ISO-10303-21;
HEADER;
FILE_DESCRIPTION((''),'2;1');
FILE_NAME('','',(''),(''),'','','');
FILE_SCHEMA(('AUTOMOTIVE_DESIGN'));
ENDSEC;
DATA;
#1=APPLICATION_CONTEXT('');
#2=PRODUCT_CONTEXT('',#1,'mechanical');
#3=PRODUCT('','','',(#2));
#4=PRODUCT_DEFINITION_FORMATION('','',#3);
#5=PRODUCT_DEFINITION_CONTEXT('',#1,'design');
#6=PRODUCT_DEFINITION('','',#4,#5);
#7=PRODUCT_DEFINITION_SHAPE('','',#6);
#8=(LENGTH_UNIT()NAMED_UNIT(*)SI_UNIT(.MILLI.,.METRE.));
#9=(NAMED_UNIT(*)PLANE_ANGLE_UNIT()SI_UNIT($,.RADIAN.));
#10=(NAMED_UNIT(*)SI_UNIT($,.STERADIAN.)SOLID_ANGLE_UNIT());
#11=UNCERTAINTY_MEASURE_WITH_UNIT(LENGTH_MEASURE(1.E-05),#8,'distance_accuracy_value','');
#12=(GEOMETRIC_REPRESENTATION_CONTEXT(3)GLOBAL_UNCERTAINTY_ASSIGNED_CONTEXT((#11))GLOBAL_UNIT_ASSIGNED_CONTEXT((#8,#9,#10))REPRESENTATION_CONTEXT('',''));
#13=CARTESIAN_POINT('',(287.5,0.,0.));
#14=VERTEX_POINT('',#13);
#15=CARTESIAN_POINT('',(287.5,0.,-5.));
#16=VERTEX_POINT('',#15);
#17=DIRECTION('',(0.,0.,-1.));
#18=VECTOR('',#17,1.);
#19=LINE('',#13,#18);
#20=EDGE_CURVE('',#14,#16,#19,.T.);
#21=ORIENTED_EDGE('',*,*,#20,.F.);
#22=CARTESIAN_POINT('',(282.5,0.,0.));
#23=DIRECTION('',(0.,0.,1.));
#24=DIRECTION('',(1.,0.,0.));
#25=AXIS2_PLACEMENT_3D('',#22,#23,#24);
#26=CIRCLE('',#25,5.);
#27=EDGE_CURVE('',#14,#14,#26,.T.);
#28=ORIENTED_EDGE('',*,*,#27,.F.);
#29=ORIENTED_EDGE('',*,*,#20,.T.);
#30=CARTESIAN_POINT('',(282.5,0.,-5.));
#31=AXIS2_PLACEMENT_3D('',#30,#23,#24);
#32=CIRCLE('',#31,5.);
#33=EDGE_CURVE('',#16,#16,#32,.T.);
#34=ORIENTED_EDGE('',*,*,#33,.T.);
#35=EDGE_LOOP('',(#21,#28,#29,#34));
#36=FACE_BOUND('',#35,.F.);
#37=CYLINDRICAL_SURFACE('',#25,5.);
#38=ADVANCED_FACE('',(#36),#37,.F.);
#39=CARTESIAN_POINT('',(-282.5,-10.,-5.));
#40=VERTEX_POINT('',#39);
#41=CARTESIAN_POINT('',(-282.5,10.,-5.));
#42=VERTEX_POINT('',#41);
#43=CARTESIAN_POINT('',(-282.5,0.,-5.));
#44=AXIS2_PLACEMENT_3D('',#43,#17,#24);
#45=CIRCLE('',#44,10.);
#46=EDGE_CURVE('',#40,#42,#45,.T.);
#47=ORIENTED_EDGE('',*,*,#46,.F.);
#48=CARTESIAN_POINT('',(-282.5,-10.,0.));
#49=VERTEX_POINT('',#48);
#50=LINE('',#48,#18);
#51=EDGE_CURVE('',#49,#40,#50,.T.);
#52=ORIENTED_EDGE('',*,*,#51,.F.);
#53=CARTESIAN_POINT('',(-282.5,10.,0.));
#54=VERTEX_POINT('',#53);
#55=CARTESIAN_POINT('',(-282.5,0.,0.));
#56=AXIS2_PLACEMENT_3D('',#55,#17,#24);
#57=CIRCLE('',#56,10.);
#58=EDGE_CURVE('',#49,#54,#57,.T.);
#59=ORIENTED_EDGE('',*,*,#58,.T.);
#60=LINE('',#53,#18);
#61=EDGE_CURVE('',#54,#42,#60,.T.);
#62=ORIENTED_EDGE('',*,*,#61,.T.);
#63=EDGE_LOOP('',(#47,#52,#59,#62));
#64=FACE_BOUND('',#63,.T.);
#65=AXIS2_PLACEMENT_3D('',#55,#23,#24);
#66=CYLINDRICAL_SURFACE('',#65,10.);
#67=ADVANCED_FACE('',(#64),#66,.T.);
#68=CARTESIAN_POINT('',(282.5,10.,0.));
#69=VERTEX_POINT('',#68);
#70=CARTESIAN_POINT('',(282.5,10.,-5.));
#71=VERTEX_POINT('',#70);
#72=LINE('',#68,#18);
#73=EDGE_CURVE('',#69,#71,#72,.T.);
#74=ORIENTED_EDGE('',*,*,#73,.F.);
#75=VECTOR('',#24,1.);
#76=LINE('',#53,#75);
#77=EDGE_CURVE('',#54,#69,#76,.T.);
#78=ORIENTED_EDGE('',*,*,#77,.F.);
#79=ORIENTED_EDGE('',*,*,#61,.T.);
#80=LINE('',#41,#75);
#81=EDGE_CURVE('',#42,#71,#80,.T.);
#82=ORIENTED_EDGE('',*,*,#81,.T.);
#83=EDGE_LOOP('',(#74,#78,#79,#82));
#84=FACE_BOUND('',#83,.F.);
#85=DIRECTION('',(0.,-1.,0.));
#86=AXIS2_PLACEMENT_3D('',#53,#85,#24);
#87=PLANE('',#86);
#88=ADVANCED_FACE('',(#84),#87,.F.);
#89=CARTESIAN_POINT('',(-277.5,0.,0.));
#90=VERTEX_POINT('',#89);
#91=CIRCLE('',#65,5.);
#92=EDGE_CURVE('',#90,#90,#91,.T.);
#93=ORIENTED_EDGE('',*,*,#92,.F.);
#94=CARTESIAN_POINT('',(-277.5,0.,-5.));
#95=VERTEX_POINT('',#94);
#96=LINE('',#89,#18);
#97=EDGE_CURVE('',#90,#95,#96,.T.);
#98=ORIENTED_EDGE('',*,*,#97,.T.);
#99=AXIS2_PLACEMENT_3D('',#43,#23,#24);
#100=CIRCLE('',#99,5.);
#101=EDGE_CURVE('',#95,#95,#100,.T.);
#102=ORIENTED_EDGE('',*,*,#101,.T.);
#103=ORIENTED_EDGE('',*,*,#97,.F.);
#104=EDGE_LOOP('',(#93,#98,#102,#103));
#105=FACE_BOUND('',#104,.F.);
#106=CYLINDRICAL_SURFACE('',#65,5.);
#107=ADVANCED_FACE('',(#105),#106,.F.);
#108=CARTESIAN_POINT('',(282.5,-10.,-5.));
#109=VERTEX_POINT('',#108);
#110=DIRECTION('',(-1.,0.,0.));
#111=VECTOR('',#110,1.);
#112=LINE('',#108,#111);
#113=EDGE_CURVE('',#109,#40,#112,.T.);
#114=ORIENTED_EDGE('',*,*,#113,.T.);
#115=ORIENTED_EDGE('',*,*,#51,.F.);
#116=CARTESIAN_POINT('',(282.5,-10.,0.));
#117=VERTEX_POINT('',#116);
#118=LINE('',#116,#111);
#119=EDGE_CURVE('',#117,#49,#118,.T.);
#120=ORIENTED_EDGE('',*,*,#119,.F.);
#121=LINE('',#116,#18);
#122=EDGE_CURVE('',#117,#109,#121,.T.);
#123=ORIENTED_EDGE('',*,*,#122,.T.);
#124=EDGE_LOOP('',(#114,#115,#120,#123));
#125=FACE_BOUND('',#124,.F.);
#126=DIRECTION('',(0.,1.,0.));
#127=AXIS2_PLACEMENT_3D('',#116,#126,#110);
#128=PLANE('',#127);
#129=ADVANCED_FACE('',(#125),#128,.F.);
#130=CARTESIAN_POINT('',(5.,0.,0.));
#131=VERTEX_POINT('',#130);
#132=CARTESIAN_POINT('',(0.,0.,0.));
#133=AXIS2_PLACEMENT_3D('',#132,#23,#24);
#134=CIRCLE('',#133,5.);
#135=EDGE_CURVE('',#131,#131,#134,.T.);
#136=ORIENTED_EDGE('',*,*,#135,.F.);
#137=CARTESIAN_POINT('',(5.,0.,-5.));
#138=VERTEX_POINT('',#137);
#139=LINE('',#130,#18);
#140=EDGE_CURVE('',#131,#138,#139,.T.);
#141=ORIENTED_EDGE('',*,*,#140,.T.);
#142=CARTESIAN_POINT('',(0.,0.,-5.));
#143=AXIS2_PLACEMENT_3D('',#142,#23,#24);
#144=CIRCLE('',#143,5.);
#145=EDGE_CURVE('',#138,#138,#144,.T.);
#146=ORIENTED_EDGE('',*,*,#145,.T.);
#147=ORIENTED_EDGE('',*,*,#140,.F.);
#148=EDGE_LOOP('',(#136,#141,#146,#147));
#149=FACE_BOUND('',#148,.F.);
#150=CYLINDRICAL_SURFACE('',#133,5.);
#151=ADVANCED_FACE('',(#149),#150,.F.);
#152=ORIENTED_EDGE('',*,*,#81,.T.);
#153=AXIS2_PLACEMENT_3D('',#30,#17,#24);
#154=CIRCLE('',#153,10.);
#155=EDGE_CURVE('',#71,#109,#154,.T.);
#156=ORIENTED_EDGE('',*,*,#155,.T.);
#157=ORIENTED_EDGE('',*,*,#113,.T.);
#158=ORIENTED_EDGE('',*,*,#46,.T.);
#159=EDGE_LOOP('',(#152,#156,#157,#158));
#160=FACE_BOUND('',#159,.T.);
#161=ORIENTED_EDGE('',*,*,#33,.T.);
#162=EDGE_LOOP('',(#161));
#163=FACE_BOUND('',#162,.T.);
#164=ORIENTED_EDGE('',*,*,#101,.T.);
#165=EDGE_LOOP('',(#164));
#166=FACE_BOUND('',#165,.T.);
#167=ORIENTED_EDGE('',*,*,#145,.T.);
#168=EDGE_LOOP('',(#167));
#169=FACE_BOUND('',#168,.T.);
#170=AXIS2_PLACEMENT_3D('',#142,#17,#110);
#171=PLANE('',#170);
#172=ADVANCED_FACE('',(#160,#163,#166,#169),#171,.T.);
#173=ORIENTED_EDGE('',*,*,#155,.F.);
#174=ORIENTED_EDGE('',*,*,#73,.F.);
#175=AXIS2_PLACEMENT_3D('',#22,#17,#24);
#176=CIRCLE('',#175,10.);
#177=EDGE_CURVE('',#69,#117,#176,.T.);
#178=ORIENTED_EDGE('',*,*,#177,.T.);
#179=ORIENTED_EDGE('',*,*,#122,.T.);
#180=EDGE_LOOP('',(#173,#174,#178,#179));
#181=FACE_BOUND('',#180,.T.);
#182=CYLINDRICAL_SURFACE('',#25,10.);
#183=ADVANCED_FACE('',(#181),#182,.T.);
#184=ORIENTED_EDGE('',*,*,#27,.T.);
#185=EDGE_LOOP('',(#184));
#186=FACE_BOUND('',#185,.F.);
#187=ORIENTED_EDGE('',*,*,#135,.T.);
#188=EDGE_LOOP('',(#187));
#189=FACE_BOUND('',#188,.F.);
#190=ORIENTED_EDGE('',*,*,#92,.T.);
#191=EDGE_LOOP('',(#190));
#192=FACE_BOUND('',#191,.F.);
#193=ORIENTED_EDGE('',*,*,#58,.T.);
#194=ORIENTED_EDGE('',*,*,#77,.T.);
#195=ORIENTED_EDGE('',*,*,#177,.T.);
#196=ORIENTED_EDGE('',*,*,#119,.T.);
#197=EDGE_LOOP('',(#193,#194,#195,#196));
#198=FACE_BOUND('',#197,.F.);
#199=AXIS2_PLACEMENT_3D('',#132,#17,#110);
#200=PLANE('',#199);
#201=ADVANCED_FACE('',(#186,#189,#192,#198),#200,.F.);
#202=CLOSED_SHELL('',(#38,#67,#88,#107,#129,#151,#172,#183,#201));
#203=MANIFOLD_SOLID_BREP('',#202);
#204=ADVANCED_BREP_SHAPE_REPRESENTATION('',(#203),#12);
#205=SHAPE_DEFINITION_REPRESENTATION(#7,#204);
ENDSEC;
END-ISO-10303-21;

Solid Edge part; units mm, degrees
sketch "Sketch1" plane through (0, 0, 0) normal (0, 0, 1) x (1, 0, 0)
  arc A0 (-282.5, -10) -> (-282.5, 10) centre (-282.5, 0) cw
  line L0 (-282.5, 10) -> (282.5, 10)
  arc A1 (282.5, 10) -> (282.5, -10) centre (282.5, 0) cw
  line L1 (282.5, -10) -> (-282.5, -10)
  circle A2 centre (-282.5, 0) radius 5
  circle A3 centre (282.5, 0) radius 5
  circle A4 centre (0, 0) radius 5
  dimension "D1" = 565
  dimension "D2" = 20
extrude "Protrusion1" add sketch "Sketch1" against normal blind 5
properties material "Stainless steel"
